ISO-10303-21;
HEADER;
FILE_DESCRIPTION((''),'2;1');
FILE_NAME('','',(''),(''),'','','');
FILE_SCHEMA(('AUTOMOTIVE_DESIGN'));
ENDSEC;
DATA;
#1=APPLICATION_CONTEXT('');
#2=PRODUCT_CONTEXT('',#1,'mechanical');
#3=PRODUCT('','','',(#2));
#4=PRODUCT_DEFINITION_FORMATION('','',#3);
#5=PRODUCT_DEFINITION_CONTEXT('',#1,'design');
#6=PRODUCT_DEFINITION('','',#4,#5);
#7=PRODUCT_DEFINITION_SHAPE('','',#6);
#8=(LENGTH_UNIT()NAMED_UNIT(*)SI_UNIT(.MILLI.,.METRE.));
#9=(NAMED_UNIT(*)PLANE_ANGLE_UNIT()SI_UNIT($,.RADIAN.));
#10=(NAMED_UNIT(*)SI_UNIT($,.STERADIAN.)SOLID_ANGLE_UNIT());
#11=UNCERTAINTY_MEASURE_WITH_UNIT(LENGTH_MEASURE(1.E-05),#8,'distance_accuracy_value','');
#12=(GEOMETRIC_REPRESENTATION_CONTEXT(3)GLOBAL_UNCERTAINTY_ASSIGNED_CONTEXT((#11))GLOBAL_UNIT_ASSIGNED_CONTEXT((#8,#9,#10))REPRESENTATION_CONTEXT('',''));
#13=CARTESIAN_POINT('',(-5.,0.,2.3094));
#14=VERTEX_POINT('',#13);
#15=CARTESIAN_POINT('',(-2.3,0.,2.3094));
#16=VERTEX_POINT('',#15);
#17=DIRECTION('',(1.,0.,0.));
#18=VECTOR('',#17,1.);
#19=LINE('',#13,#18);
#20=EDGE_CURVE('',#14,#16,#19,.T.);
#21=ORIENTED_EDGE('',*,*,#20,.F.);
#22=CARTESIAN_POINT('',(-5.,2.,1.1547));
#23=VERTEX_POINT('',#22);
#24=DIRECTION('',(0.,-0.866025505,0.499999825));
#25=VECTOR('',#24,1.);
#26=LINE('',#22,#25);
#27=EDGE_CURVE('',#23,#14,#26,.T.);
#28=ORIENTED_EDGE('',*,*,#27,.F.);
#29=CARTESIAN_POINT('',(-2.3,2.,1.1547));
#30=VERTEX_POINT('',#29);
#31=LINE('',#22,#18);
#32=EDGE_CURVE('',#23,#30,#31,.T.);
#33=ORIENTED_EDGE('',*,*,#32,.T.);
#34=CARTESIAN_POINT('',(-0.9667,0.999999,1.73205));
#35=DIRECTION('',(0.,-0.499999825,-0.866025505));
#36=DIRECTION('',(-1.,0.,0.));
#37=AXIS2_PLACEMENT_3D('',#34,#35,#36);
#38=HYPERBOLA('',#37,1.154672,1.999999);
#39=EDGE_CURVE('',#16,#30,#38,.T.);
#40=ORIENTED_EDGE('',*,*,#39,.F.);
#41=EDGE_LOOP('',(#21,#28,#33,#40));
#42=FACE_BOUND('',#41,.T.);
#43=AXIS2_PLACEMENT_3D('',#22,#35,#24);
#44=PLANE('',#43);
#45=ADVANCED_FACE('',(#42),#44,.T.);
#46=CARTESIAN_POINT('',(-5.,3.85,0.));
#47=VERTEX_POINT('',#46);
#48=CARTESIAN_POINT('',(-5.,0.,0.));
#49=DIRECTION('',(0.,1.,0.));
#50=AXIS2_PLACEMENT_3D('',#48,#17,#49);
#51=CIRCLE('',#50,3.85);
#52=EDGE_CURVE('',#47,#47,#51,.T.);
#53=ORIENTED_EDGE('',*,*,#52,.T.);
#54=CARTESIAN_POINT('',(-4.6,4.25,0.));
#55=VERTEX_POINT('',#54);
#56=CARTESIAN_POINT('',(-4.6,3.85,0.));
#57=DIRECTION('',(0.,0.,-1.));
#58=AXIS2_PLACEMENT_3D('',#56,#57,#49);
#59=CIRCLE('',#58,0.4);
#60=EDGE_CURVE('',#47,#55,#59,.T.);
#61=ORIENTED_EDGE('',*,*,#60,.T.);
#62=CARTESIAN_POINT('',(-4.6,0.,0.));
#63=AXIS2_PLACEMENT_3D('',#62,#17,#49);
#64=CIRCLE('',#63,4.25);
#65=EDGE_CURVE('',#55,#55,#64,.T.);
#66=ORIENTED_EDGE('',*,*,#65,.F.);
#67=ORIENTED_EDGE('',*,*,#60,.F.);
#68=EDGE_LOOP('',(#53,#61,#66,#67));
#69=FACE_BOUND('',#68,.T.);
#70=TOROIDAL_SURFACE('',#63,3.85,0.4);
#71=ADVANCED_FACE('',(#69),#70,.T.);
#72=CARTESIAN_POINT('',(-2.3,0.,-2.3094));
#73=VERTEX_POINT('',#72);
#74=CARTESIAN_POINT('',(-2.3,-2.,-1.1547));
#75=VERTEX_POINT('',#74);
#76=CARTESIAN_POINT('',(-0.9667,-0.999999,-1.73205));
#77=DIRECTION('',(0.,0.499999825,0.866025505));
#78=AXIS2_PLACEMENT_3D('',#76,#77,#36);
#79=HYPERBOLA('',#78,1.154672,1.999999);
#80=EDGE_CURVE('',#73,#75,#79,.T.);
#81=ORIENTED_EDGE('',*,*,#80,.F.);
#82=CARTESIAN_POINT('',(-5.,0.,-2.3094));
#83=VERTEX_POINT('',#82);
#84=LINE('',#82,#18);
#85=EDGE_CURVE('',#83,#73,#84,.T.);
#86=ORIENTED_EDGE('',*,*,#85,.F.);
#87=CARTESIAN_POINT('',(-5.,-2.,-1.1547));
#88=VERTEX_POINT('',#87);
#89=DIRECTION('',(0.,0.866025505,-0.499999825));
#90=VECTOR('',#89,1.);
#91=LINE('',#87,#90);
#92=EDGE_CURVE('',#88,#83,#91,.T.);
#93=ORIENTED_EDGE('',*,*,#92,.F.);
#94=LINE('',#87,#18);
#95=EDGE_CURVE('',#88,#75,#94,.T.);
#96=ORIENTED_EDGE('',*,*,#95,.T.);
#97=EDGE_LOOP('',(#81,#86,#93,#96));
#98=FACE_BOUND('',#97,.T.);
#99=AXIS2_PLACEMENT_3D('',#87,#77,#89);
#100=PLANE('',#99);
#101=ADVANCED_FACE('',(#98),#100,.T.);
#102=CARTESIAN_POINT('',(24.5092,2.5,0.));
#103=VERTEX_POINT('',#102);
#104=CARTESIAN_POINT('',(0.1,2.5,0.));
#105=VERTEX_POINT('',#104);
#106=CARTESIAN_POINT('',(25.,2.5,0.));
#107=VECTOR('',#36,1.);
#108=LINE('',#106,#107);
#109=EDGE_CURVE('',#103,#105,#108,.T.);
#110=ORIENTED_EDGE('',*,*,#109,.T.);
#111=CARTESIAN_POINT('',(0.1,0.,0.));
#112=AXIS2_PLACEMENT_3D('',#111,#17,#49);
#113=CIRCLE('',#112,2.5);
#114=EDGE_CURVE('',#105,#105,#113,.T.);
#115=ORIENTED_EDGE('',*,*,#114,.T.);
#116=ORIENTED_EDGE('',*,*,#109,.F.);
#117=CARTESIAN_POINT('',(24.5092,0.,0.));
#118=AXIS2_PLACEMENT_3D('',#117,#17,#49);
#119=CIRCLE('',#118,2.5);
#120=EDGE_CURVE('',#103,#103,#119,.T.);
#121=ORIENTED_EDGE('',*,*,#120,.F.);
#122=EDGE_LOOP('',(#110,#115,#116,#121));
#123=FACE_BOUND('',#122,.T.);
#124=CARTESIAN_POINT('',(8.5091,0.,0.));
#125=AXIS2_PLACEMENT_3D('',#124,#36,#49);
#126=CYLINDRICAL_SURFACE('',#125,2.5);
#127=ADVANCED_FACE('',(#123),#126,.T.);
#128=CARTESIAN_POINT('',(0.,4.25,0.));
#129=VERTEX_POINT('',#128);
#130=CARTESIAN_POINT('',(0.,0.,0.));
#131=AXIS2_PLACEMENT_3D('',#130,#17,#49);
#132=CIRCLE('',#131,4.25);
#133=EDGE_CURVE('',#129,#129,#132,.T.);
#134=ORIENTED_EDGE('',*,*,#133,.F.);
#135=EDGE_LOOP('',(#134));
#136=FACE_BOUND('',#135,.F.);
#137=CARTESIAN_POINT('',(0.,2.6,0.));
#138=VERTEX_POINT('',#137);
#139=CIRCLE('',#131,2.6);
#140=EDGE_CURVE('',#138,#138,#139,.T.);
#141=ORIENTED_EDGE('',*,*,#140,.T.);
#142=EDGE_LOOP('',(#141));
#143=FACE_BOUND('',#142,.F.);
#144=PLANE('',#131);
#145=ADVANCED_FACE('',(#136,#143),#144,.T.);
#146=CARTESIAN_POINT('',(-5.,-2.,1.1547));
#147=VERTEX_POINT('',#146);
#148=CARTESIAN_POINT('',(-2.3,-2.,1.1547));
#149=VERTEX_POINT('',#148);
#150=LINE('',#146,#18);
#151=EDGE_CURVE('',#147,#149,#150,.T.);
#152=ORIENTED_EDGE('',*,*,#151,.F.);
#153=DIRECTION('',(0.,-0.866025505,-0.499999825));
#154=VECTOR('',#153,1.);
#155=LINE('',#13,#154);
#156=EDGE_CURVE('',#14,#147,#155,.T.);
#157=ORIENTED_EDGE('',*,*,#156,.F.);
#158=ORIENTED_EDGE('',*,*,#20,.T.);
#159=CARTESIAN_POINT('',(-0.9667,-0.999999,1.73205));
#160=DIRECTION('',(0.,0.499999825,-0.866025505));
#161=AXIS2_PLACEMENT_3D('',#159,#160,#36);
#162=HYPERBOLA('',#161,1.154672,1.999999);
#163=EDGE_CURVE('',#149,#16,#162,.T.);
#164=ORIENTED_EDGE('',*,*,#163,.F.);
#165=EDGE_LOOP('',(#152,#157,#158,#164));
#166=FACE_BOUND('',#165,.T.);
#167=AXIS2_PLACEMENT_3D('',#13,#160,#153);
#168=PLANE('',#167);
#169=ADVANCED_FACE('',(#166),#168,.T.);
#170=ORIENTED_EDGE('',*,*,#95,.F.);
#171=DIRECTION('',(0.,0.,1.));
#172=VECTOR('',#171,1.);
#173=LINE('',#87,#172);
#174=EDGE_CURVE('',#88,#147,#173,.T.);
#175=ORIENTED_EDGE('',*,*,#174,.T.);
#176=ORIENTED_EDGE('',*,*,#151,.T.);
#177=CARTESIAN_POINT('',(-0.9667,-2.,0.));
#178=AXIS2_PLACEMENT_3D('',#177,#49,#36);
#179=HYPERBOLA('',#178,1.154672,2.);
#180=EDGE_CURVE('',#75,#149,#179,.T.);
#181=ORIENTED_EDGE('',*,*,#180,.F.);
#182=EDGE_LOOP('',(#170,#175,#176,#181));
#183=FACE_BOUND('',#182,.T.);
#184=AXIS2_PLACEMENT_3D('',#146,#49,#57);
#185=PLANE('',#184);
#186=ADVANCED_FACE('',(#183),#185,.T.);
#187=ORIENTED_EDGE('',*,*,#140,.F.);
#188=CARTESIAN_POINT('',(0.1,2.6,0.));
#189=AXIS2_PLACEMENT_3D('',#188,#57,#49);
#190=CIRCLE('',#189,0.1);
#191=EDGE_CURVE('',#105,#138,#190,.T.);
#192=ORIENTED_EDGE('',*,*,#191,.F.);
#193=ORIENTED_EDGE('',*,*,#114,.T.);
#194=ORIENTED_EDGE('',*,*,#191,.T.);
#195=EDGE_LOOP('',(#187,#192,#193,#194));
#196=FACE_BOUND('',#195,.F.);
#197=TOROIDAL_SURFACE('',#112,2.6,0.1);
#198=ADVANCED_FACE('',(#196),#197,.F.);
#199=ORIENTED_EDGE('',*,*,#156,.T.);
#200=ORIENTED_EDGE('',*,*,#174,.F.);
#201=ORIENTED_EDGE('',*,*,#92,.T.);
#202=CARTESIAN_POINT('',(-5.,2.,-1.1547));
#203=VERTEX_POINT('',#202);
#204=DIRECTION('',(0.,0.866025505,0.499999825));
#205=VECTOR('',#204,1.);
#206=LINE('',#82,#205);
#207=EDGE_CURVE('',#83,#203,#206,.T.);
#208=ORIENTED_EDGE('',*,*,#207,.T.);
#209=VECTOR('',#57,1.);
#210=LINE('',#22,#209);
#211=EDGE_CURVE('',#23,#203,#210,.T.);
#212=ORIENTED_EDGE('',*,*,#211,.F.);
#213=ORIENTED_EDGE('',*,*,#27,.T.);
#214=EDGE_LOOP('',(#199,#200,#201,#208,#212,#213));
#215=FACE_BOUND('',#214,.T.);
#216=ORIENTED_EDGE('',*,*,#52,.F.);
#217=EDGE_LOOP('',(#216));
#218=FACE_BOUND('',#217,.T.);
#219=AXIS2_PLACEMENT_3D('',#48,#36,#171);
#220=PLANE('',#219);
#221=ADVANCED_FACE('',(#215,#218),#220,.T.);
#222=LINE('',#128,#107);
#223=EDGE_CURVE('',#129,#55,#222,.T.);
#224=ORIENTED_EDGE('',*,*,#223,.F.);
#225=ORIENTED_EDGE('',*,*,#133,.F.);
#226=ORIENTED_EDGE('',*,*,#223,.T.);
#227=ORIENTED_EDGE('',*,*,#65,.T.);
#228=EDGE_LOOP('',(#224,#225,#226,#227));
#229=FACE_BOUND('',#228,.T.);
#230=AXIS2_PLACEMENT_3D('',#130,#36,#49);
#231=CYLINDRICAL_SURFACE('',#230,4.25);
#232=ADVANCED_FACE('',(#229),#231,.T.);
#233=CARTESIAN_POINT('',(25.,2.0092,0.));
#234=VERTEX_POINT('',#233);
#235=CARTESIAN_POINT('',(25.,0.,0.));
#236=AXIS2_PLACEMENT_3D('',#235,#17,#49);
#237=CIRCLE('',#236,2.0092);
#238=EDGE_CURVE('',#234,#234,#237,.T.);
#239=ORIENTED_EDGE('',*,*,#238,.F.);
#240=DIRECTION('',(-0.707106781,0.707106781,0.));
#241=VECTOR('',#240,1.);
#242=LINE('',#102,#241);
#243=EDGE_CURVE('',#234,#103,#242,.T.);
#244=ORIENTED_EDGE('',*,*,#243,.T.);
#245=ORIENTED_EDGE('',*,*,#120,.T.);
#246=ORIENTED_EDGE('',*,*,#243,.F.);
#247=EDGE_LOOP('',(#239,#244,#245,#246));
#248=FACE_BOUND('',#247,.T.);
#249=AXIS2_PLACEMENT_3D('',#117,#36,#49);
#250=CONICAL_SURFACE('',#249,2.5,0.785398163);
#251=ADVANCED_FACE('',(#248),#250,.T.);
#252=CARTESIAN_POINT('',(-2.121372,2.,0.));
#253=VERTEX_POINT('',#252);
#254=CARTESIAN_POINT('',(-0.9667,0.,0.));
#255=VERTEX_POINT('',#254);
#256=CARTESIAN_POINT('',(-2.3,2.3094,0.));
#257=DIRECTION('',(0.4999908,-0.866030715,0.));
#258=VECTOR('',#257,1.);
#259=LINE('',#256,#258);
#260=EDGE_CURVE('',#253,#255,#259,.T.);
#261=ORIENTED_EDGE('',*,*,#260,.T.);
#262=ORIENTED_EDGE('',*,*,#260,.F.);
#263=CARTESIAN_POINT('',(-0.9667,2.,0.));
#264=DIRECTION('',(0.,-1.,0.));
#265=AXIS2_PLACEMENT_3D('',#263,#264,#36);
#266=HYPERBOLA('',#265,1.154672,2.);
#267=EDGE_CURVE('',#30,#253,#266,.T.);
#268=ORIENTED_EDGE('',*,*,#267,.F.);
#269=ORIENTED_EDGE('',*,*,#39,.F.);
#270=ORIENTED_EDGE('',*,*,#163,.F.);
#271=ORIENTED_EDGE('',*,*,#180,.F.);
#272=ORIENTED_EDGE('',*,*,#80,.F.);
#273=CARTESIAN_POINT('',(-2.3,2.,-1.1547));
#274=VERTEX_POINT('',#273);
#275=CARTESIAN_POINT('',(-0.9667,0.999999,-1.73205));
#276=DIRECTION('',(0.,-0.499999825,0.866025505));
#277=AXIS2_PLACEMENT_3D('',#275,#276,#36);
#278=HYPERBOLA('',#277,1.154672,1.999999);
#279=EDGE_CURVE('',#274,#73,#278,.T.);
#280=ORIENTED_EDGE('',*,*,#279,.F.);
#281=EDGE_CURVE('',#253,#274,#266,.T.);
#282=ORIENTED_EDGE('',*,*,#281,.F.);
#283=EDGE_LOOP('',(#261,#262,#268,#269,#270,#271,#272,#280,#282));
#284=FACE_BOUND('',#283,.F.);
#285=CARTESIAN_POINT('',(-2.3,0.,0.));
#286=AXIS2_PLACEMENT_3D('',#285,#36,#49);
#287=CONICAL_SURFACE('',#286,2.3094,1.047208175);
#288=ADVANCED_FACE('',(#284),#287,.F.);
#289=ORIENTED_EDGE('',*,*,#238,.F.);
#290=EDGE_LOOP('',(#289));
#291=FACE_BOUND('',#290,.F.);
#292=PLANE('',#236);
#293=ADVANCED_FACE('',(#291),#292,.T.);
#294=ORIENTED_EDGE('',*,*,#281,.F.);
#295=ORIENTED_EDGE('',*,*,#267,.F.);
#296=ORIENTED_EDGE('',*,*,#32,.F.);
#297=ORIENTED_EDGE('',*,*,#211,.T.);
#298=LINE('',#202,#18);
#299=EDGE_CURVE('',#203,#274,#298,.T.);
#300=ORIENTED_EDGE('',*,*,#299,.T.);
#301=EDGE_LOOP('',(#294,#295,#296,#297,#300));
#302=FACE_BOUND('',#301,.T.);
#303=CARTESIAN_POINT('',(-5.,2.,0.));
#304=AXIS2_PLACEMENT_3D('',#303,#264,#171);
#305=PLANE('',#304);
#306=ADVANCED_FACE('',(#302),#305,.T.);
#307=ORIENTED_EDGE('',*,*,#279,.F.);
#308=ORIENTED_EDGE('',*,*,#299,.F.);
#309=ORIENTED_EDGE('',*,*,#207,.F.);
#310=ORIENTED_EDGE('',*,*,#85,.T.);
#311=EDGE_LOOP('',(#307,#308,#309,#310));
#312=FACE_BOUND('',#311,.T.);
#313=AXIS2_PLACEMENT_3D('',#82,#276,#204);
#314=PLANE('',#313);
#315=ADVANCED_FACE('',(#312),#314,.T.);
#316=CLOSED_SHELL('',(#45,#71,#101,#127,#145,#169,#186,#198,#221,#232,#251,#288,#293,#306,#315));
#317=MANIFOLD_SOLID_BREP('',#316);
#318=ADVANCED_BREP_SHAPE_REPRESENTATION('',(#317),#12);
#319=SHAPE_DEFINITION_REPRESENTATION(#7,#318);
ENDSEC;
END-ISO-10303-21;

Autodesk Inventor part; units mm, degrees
ref_plane "YZ Plane" through (0, 0, 0) normal (1, 0, 0) x (0, 1, 0)
ref_plane "XZ Plane" through (0, 0, 0) normal (0, 1, 0) x (-1, 0, 0)
sketch "Sketch1" plane through (0, 0, 0) normal (0, 0, 1) x (1, 0, 0)
  line L0 (-0.9667, 0) -> (25, 0)
  line L1 (25, 0) -> (25, 2.5)
  line L2 (25, 2.5) -> (9, 2.5)
  line L3 (9, 2.5) -> (8.5091, 2.5)
  line L4 (8.5091, 2.5) -> (0, 2.5)
  line L5 (0, 2.5) -> (0, 4.25)
  line L6 (0, 4.25) -> (-5, 4.25)
  line L7 (-5, 4.25) -> (-5, 2.3094)
  line L8 (-5, 2.3094) -> (-2.3, 2.3094)
  line L9 (-2.3, 2.3094) -> (-0.9667, 0)
  line L10 (-11, 0) -> (31, 0) projected
  line L11 (0, -0.85) -> (0, 5.1) projected
  line L12 (9, 2.5) -> (0, 2.5) construction
  dimension "d1" = 16
  dimension "d2" = 0.4909
  dimension "d3" = 5
  dimension "d4" = 2.7
  dimension "d5" = 60
  dimension "d6" = 5
  dimension "d7" = 5
  dimension "d8" = 4.6188
  dimension "d9" = 8.5
  dimension "d26" = 25
revolve "Body" add sketch "Sketch1" angle 360 about axis through (-0.9667, 0, 0) along (1, 0, 0)
sketch "Sketch2" plane through (-5, 0, 0) normal (-1, 0, 0) x (0, 0, 1)
  circle A0 centre (0, 0) radius 2.3094 projected
  line L0 (0, -5.95) -> (0, 5.95) projected
  line L1 (-5.95, 0) -> (5.95, 0) projected
  line L2 (2.3094, 0) -> (1.1547, -2)
  line L3 (1.1547, -2) -> (-1.1547, -2)
  line L4 (-1.1547, -2) -> (-2.3094, 0)
  line L5 (-2.3094, 0) -> (-1.1547, 2)
  line L6 (-1.1547, 2) -> (1.1547, 2)
  line L7 (1.1547, 2) -> (2.3094, 0)
extrude "Slot" add sketch "Sketch2" against normal up to next contours L7 A0 | A0 L2 | L6 L0 A0 | A0 L0 L3 | L0 L6 A0 | A0 L3 L0 | L4 A0 | A0 L5
fillet "Fillet1" radius 0.4 1 edges at (-5, -4.25, 0)
thread "Thread" size "M5x0.8" class "6g" standard "ISO Metric profile" length 16
chamfer "Chamfer1" distance 0.4908 distance2 0.4908 1 edges at (25, -2.5, 0) measured on face at (25, 0.6587, -0.3326)
ref_plane "Work Plane1" through (29, 0, 0) normal (0, -1, 0) x (1, 0, 0)
fillet "Fillet2" radius 0.1 1 edges at (0, -2.5, 0)
equation "\"d30\" = R"
equation "\"d17\" = RR"
equation "\"d13\" = GEL"
equation "\"d15\" = -0.5 * SPD + 0.5 * GD"
equation "\"d16\" = GUL"
equation "\"d1\" = GEL"
equation "\"d3\" = KOH"
equation "\"d4\" = INTI"
equation "\"d6\" = GD"
equation "\"d7\" = BDM"
equation "\"d8\" = 1.1547 * SW"
equation "\"d9\" = KOD"
equation "\"d26\" = NLG"
equation "\"GD\" = NND"
equation "\"NLG\" = 25"
equation "\"GEL\" = 16"
equation "\"KOD\" = 8.5"
equation "\"KOH\" = NND"
equation "\"INTI\" = 2.7"
equation "\"GAL\" = 0.61345 * PTC"
equation "\"GUL\" = 0.61345 * PTC"
equation "\"BDM\" = NND"
equation "\"SW\" = 4"
equation "\"RR\" = 0.4"
equation "\"SPD\" = NND - 1.2269 * PTC"
equation "\"R\" = 0.1"
equation "\"TOA\" = 30deg"
equation "\"GD1\" = THREADDIA - 1.2269 * PTC"
equation "\"THREADDIA\" = 5"
equation "\"FAWI\" = 45deg"
equation "\"PTC\" = 0.8"
equation "\"NND\" = 5"
equation "\"E0\" = 1.155 * SW"
equation "\"PHH\" = 0"
properties part number "CSN 02 1143 - M5 x 25" material "Steel, Mild"
